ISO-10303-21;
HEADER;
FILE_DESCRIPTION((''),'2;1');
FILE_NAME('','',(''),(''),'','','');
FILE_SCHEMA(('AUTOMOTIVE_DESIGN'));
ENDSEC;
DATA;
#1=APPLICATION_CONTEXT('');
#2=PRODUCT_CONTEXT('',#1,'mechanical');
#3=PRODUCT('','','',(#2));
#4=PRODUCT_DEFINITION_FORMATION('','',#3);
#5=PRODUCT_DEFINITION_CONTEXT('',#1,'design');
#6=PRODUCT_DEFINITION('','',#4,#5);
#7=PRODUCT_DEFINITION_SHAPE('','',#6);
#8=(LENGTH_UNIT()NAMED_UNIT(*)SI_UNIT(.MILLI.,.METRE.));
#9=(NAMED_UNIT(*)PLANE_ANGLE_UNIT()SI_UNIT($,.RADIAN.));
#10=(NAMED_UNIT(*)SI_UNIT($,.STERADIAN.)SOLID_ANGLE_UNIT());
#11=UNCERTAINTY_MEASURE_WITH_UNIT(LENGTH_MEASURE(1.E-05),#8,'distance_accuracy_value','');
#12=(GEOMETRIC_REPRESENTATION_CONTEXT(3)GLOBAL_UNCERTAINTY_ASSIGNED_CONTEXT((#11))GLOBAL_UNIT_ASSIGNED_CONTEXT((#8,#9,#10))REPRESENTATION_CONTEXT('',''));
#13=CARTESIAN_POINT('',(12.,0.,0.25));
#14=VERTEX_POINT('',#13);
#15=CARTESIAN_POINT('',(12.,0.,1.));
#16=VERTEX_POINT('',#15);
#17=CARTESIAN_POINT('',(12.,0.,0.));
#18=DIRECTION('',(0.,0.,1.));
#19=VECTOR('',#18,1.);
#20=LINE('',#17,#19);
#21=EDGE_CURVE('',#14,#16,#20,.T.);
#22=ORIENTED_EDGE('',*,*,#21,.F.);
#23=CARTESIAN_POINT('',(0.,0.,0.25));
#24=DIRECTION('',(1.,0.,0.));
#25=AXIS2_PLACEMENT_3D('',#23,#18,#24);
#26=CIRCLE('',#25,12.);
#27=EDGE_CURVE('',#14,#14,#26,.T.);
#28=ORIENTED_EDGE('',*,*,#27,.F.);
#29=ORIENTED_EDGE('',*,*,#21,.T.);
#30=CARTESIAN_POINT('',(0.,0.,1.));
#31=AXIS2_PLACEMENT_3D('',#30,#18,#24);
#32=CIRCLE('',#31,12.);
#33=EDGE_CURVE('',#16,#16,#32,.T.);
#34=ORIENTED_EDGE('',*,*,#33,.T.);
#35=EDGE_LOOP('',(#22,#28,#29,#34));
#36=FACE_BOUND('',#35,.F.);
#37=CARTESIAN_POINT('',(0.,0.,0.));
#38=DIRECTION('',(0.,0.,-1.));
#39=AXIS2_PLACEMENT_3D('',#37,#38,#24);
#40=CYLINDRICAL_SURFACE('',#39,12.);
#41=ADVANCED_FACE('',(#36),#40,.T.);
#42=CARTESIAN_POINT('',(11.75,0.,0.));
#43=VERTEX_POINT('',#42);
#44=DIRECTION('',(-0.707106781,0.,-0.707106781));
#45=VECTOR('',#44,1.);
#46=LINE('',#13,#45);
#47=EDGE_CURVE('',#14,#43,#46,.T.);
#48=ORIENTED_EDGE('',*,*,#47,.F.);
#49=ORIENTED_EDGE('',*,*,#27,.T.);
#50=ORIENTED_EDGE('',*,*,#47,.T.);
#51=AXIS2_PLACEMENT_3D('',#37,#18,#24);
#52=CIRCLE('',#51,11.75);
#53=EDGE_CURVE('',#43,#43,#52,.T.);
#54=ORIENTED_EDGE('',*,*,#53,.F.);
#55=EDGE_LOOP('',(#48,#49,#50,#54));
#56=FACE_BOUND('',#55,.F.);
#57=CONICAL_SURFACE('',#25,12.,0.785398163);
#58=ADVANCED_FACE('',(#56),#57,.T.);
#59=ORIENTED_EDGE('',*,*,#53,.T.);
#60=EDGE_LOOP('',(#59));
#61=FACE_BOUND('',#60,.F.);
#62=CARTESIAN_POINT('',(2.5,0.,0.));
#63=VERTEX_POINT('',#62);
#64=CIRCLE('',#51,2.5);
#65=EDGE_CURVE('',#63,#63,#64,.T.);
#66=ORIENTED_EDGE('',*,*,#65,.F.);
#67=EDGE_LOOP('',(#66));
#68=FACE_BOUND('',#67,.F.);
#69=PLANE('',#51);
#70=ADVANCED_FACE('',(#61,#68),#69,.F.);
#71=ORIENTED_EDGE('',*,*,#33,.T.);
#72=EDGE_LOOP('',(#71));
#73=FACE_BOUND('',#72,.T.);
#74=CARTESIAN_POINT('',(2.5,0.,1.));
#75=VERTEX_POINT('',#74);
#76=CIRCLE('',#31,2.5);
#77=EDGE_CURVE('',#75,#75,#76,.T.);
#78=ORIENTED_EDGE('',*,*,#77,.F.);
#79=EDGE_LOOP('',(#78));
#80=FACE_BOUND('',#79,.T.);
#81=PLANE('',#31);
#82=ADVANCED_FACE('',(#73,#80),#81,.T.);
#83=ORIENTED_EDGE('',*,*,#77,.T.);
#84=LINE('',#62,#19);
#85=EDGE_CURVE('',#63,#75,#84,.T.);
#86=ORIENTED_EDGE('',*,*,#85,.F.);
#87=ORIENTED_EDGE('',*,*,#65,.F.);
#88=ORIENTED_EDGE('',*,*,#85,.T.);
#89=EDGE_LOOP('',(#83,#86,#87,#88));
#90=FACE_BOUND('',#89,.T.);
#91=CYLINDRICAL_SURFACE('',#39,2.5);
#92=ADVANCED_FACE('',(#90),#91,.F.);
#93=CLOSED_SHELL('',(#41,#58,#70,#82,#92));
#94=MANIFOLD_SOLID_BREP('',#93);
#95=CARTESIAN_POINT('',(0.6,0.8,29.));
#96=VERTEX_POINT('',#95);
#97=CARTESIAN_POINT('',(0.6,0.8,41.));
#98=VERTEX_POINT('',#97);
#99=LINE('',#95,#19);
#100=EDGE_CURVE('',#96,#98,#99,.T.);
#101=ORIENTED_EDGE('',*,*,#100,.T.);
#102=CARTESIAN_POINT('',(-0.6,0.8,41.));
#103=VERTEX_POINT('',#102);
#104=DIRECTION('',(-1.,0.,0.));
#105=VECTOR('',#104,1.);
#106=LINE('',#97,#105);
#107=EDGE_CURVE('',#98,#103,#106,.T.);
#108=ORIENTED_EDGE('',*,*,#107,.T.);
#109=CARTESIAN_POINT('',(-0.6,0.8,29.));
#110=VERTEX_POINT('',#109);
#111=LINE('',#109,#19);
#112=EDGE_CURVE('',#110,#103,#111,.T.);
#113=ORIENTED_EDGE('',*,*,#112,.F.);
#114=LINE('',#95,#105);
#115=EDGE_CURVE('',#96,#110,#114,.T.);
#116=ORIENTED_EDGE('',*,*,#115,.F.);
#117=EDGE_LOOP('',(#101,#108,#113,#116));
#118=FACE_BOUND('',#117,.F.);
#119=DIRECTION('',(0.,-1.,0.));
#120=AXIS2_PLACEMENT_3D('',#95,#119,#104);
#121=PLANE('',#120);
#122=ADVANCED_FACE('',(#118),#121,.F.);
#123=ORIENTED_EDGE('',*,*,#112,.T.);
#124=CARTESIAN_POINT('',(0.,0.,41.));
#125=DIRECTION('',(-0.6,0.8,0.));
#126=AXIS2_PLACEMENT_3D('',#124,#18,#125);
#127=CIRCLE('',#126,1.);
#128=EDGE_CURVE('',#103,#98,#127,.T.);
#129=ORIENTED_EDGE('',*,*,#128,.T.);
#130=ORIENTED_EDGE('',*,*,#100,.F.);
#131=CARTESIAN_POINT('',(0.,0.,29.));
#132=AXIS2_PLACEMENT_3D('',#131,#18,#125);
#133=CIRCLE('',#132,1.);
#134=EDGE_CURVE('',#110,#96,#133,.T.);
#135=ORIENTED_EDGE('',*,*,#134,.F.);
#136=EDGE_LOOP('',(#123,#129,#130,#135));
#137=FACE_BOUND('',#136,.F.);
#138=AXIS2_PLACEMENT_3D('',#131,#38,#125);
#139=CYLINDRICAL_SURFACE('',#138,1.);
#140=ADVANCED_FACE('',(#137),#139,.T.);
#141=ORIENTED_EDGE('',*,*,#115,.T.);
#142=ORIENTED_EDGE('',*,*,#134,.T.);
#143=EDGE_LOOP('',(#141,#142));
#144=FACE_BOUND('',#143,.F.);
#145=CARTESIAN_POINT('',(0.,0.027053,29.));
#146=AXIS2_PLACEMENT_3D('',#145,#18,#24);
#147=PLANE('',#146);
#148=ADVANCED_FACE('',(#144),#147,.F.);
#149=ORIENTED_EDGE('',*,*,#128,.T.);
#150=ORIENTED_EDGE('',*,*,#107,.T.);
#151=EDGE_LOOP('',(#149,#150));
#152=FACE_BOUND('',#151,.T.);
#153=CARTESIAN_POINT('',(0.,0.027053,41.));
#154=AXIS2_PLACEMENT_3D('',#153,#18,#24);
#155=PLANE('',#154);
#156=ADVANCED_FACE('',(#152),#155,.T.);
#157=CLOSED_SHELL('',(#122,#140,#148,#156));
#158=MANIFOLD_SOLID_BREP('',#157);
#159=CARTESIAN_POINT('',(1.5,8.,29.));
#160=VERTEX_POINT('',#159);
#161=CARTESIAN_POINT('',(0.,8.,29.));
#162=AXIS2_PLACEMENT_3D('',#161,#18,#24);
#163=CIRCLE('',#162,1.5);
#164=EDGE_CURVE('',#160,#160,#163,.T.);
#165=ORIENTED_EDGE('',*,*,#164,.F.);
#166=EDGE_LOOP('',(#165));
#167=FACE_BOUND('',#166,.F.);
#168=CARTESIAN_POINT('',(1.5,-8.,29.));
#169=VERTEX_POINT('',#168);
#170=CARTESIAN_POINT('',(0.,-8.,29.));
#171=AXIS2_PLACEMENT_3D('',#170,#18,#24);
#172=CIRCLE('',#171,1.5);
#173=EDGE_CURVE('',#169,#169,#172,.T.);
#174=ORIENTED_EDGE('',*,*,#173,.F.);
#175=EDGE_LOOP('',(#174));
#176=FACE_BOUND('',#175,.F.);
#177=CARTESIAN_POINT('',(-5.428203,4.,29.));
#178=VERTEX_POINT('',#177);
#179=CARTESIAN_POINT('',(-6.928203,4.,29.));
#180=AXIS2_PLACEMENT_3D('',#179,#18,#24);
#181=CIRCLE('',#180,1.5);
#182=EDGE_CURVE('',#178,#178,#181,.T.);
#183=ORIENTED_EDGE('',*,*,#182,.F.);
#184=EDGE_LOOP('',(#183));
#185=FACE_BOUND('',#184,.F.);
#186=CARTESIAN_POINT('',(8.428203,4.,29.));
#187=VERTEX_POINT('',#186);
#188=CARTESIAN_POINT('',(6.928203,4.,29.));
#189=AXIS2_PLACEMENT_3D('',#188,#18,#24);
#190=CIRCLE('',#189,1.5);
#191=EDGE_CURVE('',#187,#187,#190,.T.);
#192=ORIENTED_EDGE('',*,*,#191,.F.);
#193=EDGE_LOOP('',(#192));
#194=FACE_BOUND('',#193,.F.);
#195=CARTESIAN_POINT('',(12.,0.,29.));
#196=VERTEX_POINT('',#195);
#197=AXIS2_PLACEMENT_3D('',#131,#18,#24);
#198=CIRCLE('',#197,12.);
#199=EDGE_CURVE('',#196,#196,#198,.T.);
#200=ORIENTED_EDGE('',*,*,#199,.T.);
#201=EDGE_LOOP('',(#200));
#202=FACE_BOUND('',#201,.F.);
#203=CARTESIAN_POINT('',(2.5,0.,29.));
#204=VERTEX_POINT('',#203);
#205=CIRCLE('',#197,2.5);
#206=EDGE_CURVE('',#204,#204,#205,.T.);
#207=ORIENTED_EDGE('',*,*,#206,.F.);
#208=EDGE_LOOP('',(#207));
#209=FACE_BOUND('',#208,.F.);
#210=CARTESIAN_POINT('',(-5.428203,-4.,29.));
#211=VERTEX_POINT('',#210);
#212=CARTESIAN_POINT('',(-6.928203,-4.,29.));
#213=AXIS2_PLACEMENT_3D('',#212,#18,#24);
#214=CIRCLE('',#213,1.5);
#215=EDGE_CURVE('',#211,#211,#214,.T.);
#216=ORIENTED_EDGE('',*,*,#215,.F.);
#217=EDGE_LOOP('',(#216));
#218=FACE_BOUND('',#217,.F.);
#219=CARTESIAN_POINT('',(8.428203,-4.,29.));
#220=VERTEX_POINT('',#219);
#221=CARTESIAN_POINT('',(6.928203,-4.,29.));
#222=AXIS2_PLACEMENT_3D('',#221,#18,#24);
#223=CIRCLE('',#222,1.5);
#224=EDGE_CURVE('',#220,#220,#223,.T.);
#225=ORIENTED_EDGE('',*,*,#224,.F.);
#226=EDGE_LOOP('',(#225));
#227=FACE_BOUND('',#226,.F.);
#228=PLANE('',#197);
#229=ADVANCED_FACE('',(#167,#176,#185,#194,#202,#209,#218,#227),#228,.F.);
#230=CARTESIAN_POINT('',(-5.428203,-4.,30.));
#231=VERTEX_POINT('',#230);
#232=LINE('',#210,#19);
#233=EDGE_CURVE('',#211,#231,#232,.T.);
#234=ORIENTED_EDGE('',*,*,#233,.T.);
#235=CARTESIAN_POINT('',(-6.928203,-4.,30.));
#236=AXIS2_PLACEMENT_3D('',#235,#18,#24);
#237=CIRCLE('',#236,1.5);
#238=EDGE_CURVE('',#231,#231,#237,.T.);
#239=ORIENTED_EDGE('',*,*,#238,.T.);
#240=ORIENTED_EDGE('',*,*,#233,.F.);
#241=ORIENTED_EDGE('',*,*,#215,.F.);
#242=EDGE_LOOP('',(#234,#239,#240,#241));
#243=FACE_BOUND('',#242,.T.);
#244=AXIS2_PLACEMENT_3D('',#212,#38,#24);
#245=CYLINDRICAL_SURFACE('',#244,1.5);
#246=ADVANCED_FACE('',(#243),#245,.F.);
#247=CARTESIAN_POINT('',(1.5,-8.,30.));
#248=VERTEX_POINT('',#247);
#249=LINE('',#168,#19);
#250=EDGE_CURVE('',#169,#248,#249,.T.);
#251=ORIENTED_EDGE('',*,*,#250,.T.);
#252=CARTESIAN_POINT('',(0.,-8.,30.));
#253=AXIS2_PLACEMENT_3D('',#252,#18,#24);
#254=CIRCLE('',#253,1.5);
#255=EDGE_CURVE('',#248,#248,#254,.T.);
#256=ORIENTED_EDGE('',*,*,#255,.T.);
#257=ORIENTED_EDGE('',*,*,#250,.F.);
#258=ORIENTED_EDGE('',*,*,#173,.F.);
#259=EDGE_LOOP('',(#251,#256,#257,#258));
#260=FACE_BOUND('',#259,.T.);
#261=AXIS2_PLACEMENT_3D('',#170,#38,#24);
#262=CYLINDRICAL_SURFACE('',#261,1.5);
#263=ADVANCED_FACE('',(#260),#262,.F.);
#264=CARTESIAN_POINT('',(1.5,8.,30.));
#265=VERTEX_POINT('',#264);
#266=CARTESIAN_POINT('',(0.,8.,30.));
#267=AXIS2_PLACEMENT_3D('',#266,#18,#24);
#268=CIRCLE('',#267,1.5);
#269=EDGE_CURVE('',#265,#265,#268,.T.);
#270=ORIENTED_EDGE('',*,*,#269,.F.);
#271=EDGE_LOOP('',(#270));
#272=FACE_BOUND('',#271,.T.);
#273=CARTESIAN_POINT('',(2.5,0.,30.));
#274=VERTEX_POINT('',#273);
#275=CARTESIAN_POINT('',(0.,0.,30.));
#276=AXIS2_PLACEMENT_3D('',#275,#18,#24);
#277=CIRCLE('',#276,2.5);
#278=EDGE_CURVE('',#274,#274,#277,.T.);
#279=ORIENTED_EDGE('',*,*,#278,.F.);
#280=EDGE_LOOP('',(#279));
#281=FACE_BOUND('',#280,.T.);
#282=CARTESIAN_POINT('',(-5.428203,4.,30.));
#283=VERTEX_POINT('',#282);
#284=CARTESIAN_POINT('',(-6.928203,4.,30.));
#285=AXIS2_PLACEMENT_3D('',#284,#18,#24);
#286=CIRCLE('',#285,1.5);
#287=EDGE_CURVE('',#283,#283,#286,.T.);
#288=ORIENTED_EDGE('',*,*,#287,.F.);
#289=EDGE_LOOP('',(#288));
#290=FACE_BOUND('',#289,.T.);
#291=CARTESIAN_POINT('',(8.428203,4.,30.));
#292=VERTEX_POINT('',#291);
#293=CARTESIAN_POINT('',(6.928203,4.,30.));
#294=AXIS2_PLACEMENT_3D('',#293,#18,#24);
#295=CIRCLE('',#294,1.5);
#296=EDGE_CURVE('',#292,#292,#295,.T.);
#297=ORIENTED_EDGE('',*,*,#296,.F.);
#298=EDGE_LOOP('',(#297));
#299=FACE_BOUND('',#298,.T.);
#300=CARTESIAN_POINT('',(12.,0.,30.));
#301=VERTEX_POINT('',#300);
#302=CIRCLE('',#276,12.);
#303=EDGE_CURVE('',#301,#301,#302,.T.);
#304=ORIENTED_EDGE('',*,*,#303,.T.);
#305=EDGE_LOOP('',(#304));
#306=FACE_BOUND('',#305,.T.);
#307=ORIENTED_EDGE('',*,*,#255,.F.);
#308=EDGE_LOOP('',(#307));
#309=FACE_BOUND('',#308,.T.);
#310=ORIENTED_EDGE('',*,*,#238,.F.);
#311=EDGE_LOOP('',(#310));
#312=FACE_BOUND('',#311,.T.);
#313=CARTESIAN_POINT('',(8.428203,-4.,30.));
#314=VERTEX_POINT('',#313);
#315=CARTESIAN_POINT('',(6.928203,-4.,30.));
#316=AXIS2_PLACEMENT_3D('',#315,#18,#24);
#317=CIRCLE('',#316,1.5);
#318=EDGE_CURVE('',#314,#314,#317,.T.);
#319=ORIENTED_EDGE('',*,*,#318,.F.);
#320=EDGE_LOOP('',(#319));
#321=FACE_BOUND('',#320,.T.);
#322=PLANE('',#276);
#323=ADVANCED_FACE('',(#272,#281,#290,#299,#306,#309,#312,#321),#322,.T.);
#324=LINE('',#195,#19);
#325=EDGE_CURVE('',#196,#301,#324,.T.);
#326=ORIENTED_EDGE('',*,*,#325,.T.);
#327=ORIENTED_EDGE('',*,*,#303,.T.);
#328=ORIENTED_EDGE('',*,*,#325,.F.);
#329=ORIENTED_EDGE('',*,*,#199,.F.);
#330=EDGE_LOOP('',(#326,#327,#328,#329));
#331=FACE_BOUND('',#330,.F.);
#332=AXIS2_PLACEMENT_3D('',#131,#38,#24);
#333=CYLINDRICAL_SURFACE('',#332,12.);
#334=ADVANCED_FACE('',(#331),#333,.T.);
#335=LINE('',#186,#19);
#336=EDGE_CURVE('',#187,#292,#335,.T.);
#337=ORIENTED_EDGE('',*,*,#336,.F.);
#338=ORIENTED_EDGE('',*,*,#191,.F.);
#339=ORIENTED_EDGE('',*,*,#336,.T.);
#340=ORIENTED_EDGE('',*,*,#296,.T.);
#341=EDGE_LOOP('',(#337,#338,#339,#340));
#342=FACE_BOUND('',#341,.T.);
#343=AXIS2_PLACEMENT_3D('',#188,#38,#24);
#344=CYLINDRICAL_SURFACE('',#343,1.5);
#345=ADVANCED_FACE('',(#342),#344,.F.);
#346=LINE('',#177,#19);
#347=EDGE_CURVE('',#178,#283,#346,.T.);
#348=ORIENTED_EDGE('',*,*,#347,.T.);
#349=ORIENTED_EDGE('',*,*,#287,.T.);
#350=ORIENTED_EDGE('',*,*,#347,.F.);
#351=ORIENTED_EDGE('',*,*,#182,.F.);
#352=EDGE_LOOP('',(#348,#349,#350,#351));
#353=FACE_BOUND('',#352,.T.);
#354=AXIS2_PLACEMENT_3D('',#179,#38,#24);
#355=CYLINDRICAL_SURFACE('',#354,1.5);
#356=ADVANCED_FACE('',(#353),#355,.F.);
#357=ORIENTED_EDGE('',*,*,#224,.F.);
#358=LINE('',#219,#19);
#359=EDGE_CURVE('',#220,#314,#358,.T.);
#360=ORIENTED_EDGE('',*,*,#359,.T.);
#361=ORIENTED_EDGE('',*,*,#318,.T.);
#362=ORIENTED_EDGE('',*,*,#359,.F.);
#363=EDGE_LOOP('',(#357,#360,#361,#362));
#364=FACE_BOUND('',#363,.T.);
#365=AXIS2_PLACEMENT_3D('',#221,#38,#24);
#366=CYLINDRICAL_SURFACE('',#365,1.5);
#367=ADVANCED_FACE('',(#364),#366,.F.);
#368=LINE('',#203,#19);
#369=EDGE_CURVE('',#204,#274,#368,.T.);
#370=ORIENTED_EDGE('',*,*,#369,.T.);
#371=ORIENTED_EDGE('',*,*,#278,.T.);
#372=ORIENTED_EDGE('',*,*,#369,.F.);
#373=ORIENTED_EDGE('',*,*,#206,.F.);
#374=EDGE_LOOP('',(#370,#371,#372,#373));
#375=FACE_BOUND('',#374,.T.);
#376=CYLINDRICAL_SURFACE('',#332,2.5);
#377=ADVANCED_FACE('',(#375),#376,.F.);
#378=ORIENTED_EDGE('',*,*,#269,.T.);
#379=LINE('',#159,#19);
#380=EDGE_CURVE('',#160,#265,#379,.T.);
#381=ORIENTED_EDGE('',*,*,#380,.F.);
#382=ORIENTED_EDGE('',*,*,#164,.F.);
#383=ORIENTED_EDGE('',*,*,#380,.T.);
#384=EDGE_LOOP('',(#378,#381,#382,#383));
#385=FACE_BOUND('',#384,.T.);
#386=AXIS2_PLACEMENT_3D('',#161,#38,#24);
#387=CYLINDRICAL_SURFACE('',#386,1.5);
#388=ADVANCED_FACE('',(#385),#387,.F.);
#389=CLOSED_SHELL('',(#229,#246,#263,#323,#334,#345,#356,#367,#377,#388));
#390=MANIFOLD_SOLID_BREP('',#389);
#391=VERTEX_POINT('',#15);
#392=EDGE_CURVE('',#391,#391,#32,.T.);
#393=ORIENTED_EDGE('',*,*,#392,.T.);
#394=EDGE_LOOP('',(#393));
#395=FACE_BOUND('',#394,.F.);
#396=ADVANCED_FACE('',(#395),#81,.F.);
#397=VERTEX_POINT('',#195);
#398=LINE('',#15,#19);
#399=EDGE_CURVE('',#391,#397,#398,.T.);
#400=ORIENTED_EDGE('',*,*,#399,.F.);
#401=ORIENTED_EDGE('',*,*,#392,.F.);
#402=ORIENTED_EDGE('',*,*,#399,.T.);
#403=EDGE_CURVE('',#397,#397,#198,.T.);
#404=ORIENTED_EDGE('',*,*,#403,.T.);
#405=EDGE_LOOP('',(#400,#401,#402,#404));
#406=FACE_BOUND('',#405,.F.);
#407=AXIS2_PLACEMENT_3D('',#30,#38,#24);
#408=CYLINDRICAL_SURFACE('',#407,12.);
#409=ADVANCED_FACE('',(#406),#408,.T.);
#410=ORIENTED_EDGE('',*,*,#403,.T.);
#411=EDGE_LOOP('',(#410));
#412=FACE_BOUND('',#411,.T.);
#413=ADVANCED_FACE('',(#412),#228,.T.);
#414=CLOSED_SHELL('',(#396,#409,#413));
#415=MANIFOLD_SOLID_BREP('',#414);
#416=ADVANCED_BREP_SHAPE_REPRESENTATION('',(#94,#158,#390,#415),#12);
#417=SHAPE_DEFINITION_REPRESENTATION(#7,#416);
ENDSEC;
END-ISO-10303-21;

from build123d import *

# Parameters (mm, degrees)
F2_R     = 12
F2_R_2   = 1.5
F2_R_3   = 2.5
F3_DEPTH = 1
F4_START = 1
F4_DEPTH = 28
F5_START = 29
F5_DEPTH = 1
F6_START = 29
F6_DEPTH = 12
F7_SIZE  = 0.25


with BuildPart() as f3:
    # F2 (on Top) → F3 (new body)
    with BuildSketch(Plane.XY):
        Circle(F2_R)
        with Locations((-6.9282032303, -4)):
            Circle(F2_R_2, mode=Mode.SUBTRACT)
        with Locations((0, -8)):
            Circle(F2_R_2, mode=Mode.SUBTRACT)
        with Locations((6.9282032303, -4)):
            Circle(F2_R_2, mode=Mode.SUBTRACT)
        with Locations((-6.9282032303, 4)):
            Circle(F2_R_2, mode=Mode.SUBTRACT)
        Circle(F2_R_3, mode=Mode.SUBTRACT)
        with Locations((6.9282032303, 4)):
            Circle(F2_R_2, mode=Mode.SUBTRACT)
        with Locations((0, 8)):
            Circle(F2_R_2, mode=Mode.SUBTRACT)
        with Locations((-6.9282032303, 4)):
            Circle(F2_R_2)
        with Locations((-6.9282032303, -4)):
            Circle(F2_R_2)
        with Locations((0, -8)):
            Circle(F2_R_2)
        with Locations((6.9282032303, -4)):
            Circle(F2_R_2)
        with Locations((6.9282032303, 4)):
            Circle(F2_R_2)
        with Locations((0, 8)):
            Circle(F2_R_2)
    extrude(amount=F3_DEPTH)

    # F7
    f7_edges = [f3.edges().sort_by_distance(p)[0] for p in [
        (-12, 0, 0),
    ]]
    chamfer(f7_edges, length=F7_SIZE)


with BuildPart() as f4:
    # F2 (on Top) → F4 (new body)
    with BuildSketch(Plane.XY.offset(F4_START)):
        Circle(F2_R)
        with Locations((-6.9282032303, -4)):
            Circle(F2_R_2, mode=Mode.SUBTRACT)
        with Locations((0, -8)):
            Circle(F2_R_2, mode=Mode.SUBTRACT)
        with Locations((6.9282032303, -4)):
            Circle(F2_R_2, mode=Mode.SUBTRACT)
        with Locations((-6.9282032303, 4)):
            Circle(F2_R_2, mode=Mode.SUBTRACT)
        Circle(F2_R_3, mode=Mode.SUBTRACT)
        with Locations((6.9282032303, 4)):
            Circle(F2_R_2, mode=Mode.SUBTRACT)
        with Locations((0, 8)):
            Circle(F2_R_2, mode=Mode.SUBTRACT)
        Circle(F2_R_3)
        with BuildLine():
            ThreePointArc((0.6, 0.8), (0.894427191, 0.4472135955), (1, 0))
            ThreePointArc((1, 0), (-0.4472135955, -0.894427191), (-0.6, 0.8))
            ThreePointArc((-0.6, 0.8), (0, 1), (0.6, 0.8))
        make_face(mode=Mode.SUBTRACT)
        with Locations((-6.9282032303, -4)):
            Circle(F2_R_2)
        with Locations((0, -8)):
            Circle(F2_R_2)
        with Locations((6.9282032303, 4)):
            Circle(F2_R_2)
        with Locations((6.9282032303, -4)):
            Circle(F2_R_2)
        with Locations((0, 8)):
            Circle(F2_R_2)
        with Locations((-6.9282032303, 4)):
            Circle(F2_R_2)
        with BuildLine():
            ThreePointArc((-0.6, 0.8), (-0.4472135955, -0.894427191), (1, 0))
            ThreePointArc((1, 0), (0.894427191, 0.4472135955), (0.6, 0.8))
            Line((0.6, 0.8), (-0.6, 0.8))
        make_face()
        with BuildLine():
            Line((-0.6, 0.8), (0.6, 0.8))
            ThreePointArc((0.6, 0.8), (0, 1), (-0.6, 0.8))
        make_face()
    extrude(amount=F4_DEPTH)


with BuildPart() as f5:
    # F2 (on Top) → F5 (new body)
    with BuildSketch(Plane.XY.offset(F5_START)):
        Circle(F2_R)
        with Locations((-6.9282032303, -4)):
            Circle(F2_R_2, mode=Mode.SUBTRACT)
        with Locations((0, -8)):
            Circle(F2_R_2, mode=Mode.SUBTRACT)
        with Locations((6.9282032303, -4)):
            Circle(F2_R_2, mode=Mode.SUBTRACT)
        with Locations((-6.9282032303, 4)):
            Circle(F2_R_2, mode=Mode.SUBTRACT)
        Circle(F2_R_3, mode=Mode.SUBTRACT)
        with Locations((6.9282032303, 4)):
            Circle(F2_R_2, mode=Mode.SUBTRACT)
        with Locations((0, 8)):
            Circle(F2_R_2, mode=Mode.SUBTRACT)
    extrude(amount=F5_DEPTH)


with BuildPart() as f6:
    # F2 (on Top) → F6 (new body)
    with BuildSketch(Plane.XY.offset(F6_START)):
        with BuildLine():
            ThreePointArc((-0.6, 0.8), (-0.4472135955, -0.894427191), (1, 0))
            ThreePointArc((1, 0), (0.894427191, 0.4472135955), (0.6, 0.8))
            Line((0.6, 0.8), (-0.6, 0.8))
        make_face()
    extrude(amount=F6_DEPTH)


solid = Compound([f3.part, f4.part, f5.part, f6.part])
